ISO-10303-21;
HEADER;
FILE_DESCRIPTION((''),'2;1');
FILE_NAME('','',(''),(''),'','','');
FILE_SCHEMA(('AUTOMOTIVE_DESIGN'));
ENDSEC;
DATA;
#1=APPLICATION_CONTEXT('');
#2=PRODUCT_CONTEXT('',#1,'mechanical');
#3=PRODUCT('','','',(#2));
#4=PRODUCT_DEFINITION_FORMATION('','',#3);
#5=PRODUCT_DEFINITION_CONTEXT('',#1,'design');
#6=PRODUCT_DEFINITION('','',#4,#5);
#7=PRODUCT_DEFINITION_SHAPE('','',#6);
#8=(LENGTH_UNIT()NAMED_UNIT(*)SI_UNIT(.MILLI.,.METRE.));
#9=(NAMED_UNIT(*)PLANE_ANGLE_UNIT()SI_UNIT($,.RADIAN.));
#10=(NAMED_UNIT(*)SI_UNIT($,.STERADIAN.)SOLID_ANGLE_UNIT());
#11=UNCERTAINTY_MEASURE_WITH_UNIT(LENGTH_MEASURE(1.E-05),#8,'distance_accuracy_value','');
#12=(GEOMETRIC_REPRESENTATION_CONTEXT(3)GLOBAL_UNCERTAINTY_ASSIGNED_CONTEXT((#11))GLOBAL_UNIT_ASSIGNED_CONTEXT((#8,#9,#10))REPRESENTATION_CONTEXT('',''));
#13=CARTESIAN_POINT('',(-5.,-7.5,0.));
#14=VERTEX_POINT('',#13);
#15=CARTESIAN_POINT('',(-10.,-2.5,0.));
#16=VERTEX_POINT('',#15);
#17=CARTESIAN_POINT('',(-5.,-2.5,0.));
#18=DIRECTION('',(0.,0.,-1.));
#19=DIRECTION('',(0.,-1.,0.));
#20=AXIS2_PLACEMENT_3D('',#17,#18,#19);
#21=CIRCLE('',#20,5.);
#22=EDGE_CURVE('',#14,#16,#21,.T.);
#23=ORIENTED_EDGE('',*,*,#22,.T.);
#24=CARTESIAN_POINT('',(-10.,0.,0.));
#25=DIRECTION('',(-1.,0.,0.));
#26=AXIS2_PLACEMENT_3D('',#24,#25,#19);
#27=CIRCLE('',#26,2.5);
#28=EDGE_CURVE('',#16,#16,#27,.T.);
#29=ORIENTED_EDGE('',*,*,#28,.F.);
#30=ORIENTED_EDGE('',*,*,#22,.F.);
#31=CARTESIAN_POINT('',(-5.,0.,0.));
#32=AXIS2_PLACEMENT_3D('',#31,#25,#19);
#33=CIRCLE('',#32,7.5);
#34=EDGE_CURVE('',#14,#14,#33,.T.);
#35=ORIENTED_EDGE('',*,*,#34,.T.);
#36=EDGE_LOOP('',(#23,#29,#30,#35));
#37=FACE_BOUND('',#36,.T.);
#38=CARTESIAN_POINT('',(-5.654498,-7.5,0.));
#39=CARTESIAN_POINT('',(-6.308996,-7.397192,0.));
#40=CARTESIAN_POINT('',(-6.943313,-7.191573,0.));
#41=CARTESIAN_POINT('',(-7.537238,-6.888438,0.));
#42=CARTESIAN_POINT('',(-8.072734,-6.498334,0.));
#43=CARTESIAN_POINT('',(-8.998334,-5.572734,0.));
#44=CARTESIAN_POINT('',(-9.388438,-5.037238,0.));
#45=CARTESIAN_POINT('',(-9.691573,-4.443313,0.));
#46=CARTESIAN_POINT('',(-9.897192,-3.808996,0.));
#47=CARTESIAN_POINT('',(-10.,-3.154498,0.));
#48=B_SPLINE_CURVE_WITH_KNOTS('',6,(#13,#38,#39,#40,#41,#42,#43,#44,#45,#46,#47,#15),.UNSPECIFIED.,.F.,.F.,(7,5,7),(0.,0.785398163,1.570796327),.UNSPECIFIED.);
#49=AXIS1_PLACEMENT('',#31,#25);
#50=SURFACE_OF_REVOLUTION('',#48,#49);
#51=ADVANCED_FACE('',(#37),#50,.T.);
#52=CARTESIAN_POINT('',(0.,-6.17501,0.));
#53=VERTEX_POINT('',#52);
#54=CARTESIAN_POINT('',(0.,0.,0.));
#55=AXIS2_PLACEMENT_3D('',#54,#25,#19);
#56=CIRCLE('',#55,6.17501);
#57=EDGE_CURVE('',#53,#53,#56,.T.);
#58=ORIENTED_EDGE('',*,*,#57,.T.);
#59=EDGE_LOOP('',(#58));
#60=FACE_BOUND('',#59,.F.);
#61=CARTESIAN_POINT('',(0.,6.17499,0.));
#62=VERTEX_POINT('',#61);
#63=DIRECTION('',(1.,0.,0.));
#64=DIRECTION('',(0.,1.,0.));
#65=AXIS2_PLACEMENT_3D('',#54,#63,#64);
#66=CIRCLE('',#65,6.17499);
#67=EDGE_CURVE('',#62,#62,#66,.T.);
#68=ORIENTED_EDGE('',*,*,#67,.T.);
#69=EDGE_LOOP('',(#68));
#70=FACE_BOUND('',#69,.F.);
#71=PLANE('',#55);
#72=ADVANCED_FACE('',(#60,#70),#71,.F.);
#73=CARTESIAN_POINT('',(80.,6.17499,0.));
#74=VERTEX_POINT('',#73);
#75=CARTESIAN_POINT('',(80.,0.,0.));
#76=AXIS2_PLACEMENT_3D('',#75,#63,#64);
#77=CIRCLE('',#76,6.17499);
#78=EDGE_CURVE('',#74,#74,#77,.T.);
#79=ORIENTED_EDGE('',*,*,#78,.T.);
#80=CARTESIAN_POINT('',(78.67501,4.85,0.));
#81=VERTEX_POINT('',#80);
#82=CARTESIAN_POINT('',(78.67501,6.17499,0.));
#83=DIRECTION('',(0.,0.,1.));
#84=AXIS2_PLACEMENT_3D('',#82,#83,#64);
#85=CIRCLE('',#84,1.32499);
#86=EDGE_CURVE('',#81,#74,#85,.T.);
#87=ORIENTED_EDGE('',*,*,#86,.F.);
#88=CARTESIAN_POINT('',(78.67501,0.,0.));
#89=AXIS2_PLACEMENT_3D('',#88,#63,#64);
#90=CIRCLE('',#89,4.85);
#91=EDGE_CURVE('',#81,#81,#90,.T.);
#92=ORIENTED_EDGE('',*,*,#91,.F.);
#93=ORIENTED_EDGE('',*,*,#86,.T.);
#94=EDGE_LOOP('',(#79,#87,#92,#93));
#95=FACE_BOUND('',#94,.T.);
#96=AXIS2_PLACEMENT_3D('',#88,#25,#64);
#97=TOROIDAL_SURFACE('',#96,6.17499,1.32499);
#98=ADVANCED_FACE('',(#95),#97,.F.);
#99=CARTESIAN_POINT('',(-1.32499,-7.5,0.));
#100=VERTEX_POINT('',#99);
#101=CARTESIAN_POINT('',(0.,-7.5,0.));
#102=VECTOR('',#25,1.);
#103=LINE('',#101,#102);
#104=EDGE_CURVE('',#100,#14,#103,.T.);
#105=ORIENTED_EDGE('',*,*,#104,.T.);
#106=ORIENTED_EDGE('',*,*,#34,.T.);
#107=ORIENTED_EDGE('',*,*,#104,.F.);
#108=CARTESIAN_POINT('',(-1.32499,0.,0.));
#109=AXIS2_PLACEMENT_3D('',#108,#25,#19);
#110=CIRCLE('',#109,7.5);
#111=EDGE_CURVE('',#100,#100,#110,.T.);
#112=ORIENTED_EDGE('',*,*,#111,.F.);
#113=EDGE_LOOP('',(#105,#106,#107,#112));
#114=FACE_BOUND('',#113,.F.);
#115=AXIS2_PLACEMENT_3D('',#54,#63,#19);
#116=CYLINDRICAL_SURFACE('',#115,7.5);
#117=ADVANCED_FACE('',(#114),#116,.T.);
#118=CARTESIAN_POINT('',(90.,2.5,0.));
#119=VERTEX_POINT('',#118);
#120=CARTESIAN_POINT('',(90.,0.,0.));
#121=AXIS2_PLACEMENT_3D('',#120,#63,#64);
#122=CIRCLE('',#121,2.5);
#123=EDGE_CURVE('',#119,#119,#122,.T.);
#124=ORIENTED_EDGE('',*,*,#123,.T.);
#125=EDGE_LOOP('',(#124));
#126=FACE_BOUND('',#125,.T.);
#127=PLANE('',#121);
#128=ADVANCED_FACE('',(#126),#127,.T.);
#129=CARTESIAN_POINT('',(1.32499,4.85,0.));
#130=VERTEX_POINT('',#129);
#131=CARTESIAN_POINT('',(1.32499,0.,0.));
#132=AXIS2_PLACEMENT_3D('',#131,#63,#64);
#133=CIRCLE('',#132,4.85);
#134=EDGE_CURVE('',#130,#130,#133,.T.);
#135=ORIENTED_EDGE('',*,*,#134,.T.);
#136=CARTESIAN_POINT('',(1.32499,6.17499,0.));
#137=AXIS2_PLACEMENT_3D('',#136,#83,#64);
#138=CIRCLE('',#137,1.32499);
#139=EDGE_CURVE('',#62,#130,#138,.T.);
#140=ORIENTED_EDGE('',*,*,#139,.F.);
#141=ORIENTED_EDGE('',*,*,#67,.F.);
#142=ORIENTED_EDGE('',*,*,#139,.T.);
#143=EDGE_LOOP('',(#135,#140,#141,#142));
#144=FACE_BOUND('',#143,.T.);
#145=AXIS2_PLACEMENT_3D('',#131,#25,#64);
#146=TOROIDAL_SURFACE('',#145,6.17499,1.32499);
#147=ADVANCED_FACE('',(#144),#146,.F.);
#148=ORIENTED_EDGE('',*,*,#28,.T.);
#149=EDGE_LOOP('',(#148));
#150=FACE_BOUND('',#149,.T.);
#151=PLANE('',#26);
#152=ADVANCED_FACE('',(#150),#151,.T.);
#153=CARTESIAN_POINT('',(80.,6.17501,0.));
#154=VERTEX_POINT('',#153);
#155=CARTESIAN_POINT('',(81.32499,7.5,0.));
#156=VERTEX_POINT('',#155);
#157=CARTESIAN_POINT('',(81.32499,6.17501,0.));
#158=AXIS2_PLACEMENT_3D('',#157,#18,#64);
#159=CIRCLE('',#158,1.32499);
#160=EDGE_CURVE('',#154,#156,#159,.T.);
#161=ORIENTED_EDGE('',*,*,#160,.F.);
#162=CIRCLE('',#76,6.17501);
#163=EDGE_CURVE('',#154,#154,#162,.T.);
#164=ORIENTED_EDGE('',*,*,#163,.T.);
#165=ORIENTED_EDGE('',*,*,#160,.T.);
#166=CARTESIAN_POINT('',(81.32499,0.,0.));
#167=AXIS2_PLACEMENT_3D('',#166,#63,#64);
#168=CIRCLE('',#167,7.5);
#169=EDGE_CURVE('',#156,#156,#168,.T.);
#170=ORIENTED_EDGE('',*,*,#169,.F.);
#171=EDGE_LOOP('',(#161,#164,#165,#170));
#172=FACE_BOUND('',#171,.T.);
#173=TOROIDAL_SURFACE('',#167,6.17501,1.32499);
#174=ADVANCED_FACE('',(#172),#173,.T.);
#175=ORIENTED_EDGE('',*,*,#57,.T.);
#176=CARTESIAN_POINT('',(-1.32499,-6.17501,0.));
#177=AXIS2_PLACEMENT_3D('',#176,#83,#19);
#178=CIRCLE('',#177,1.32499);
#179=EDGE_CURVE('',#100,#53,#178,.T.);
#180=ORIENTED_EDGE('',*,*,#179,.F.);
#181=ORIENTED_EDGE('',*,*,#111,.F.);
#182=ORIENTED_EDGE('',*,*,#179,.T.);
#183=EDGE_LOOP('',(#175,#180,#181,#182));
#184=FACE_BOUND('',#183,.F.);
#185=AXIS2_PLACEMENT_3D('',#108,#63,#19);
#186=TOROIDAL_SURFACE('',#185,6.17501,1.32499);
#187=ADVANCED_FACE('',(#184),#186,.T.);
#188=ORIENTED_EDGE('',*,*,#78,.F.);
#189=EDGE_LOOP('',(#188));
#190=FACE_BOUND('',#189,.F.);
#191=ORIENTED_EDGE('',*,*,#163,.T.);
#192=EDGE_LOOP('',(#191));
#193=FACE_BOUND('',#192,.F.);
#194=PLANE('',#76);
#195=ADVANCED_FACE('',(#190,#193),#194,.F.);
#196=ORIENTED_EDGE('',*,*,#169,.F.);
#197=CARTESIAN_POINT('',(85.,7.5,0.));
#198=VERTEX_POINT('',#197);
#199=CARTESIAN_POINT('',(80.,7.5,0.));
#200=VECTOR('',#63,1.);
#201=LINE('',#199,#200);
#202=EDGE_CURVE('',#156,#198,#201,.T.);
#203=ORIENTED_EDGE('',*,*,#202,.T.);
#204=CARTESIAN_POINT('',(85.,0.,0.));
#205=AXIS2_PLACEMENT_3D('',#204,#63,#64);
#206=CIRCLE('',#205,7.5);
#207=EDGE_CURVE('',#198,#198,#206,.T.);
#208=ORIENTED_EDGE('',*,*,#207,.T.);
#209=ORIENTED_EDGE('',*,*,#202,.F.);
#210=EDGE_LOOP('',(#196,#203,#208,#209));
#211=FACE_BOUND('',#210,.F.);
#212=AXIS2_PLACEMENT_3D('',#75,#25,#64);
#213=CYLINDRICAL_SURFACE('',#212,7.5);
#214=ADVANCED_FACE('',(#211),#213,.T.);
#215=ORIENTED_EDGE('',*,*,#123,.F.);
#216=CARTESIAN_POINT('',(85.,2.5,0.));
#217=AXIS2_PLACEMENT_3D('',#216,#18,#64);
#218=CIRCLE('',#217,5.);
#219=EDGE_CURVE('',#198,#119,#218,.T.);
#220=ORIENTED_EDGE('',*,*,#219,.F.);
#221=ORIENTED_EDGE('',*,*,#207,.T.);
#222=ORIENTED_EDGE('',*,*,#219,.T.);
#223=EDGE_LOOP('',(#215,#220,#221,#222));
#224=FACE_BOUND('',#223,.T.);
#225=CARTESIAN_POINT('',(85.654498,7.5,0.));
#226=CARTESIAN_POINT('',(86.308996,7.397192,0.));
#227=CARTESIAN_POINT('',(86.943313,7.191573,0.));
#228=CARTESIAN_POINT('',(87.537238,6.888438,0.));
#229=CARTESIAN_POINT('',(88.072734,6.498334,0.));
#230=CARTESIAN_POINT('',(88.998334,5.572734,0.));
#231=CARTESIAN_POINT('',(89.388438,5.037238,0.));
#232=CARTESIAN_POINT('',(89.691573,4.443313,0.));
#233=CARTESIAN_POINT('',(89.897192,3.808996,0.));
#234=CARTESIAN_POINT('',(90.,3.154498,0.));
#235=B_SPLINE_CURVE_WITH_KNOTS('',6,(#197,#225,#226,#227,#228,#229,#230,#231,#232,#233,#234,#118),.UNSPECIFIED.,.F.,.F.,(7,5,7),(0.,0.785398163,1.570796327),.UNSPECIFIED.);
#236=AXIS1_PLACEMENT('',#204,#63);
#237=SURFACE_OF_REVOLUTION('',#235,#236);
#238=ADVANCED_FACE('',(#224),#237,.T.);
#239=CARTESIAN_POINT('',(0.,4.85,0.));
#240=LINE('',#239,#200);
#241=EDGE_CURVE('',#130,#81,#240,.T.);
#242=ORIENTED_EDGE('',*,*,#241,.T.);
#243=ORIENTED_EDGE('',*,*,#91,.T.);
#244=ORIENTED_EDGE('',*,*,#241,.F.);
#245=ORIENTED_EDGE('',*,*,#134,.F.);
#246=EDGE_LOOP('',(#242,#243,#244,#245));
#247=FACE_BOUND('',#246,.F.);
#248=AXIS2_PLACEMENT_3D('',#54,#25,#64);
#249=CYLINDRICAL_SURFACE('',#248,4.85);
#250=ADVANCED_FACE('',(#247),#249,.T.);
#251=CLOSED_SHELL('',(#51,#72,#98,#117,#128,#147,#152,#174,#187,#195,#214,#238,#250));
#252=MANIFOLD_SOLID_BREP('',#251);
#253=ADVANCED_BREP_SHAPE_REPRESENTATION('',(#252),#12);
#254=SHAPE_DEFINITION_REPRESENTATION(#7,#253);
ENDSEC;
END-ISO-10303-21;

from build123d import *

# Parameters (mm, degrees)
F0_R     = 4.85
F1_DEPTH = 80
F2_R     = 7.5
F3_DEPTH = 10
F4_R     = 7.5
F5_DEPTH = 10
F6_R     = 1.32499
F7_R     = 1.32499
F8_R     = 5


# Not quite as in the source:
# - a fillet or chamfer is up to 0.001 mm smaller than in the source, because OpenCascade refuses the exact size


with BuildPart() as f1:
    # F0 (on Right) → F1 (new body)
    with BuildSketch(Plane.YZ):
        Circle(F0_R)
    extrude(amount=F1_DEPTH)

    # F2 (on face) → F3 (join)
    with BuildSketch(Plane.YZ.offset(80)):
        Circle(F2_R)
    extrude(amount=F3_DEPTH)

    # F4 (on face) → F5 (join)
    with BuildSketch(Plane(origin=(0, 0, 0), x_dir=(0, -1, 0), z_dir=(-1, 0, 0))):
        Circle(F4_R)
    extrude(amount=F5_DEPTH)

    # F6 (radius 1.325 in the source; OpenCascade refuses exactly that, so slightly less here)
    f6_edges = [f1.edges().sort_by_distance(p)[0] for p in [
        (0, -4.85, 0),
        (0, 7.5, 0),
    ]]
    fillet(f6_edges, radius=F6_R)

    # F7 (radius 1.325 in the source; OpenCascade refuses exactly that, so slightly less here)
    f7_edges = [f1.edges().sort_by_distance(p)[0] for p in [
        (80, -4.85, 0),
        (80, -7.5, 0),
    ]]
    fillet(f7_edges, radius=F7_R)

    # F8
    f8_edges = [f1.edges().sort_by_distance(p)[0] for p in [
        (-10, 7.5, 0),
        (90, -7.5, 0),
    ]]
    fillet(f8_edges, radius=F8_R)


solid = f1.part
